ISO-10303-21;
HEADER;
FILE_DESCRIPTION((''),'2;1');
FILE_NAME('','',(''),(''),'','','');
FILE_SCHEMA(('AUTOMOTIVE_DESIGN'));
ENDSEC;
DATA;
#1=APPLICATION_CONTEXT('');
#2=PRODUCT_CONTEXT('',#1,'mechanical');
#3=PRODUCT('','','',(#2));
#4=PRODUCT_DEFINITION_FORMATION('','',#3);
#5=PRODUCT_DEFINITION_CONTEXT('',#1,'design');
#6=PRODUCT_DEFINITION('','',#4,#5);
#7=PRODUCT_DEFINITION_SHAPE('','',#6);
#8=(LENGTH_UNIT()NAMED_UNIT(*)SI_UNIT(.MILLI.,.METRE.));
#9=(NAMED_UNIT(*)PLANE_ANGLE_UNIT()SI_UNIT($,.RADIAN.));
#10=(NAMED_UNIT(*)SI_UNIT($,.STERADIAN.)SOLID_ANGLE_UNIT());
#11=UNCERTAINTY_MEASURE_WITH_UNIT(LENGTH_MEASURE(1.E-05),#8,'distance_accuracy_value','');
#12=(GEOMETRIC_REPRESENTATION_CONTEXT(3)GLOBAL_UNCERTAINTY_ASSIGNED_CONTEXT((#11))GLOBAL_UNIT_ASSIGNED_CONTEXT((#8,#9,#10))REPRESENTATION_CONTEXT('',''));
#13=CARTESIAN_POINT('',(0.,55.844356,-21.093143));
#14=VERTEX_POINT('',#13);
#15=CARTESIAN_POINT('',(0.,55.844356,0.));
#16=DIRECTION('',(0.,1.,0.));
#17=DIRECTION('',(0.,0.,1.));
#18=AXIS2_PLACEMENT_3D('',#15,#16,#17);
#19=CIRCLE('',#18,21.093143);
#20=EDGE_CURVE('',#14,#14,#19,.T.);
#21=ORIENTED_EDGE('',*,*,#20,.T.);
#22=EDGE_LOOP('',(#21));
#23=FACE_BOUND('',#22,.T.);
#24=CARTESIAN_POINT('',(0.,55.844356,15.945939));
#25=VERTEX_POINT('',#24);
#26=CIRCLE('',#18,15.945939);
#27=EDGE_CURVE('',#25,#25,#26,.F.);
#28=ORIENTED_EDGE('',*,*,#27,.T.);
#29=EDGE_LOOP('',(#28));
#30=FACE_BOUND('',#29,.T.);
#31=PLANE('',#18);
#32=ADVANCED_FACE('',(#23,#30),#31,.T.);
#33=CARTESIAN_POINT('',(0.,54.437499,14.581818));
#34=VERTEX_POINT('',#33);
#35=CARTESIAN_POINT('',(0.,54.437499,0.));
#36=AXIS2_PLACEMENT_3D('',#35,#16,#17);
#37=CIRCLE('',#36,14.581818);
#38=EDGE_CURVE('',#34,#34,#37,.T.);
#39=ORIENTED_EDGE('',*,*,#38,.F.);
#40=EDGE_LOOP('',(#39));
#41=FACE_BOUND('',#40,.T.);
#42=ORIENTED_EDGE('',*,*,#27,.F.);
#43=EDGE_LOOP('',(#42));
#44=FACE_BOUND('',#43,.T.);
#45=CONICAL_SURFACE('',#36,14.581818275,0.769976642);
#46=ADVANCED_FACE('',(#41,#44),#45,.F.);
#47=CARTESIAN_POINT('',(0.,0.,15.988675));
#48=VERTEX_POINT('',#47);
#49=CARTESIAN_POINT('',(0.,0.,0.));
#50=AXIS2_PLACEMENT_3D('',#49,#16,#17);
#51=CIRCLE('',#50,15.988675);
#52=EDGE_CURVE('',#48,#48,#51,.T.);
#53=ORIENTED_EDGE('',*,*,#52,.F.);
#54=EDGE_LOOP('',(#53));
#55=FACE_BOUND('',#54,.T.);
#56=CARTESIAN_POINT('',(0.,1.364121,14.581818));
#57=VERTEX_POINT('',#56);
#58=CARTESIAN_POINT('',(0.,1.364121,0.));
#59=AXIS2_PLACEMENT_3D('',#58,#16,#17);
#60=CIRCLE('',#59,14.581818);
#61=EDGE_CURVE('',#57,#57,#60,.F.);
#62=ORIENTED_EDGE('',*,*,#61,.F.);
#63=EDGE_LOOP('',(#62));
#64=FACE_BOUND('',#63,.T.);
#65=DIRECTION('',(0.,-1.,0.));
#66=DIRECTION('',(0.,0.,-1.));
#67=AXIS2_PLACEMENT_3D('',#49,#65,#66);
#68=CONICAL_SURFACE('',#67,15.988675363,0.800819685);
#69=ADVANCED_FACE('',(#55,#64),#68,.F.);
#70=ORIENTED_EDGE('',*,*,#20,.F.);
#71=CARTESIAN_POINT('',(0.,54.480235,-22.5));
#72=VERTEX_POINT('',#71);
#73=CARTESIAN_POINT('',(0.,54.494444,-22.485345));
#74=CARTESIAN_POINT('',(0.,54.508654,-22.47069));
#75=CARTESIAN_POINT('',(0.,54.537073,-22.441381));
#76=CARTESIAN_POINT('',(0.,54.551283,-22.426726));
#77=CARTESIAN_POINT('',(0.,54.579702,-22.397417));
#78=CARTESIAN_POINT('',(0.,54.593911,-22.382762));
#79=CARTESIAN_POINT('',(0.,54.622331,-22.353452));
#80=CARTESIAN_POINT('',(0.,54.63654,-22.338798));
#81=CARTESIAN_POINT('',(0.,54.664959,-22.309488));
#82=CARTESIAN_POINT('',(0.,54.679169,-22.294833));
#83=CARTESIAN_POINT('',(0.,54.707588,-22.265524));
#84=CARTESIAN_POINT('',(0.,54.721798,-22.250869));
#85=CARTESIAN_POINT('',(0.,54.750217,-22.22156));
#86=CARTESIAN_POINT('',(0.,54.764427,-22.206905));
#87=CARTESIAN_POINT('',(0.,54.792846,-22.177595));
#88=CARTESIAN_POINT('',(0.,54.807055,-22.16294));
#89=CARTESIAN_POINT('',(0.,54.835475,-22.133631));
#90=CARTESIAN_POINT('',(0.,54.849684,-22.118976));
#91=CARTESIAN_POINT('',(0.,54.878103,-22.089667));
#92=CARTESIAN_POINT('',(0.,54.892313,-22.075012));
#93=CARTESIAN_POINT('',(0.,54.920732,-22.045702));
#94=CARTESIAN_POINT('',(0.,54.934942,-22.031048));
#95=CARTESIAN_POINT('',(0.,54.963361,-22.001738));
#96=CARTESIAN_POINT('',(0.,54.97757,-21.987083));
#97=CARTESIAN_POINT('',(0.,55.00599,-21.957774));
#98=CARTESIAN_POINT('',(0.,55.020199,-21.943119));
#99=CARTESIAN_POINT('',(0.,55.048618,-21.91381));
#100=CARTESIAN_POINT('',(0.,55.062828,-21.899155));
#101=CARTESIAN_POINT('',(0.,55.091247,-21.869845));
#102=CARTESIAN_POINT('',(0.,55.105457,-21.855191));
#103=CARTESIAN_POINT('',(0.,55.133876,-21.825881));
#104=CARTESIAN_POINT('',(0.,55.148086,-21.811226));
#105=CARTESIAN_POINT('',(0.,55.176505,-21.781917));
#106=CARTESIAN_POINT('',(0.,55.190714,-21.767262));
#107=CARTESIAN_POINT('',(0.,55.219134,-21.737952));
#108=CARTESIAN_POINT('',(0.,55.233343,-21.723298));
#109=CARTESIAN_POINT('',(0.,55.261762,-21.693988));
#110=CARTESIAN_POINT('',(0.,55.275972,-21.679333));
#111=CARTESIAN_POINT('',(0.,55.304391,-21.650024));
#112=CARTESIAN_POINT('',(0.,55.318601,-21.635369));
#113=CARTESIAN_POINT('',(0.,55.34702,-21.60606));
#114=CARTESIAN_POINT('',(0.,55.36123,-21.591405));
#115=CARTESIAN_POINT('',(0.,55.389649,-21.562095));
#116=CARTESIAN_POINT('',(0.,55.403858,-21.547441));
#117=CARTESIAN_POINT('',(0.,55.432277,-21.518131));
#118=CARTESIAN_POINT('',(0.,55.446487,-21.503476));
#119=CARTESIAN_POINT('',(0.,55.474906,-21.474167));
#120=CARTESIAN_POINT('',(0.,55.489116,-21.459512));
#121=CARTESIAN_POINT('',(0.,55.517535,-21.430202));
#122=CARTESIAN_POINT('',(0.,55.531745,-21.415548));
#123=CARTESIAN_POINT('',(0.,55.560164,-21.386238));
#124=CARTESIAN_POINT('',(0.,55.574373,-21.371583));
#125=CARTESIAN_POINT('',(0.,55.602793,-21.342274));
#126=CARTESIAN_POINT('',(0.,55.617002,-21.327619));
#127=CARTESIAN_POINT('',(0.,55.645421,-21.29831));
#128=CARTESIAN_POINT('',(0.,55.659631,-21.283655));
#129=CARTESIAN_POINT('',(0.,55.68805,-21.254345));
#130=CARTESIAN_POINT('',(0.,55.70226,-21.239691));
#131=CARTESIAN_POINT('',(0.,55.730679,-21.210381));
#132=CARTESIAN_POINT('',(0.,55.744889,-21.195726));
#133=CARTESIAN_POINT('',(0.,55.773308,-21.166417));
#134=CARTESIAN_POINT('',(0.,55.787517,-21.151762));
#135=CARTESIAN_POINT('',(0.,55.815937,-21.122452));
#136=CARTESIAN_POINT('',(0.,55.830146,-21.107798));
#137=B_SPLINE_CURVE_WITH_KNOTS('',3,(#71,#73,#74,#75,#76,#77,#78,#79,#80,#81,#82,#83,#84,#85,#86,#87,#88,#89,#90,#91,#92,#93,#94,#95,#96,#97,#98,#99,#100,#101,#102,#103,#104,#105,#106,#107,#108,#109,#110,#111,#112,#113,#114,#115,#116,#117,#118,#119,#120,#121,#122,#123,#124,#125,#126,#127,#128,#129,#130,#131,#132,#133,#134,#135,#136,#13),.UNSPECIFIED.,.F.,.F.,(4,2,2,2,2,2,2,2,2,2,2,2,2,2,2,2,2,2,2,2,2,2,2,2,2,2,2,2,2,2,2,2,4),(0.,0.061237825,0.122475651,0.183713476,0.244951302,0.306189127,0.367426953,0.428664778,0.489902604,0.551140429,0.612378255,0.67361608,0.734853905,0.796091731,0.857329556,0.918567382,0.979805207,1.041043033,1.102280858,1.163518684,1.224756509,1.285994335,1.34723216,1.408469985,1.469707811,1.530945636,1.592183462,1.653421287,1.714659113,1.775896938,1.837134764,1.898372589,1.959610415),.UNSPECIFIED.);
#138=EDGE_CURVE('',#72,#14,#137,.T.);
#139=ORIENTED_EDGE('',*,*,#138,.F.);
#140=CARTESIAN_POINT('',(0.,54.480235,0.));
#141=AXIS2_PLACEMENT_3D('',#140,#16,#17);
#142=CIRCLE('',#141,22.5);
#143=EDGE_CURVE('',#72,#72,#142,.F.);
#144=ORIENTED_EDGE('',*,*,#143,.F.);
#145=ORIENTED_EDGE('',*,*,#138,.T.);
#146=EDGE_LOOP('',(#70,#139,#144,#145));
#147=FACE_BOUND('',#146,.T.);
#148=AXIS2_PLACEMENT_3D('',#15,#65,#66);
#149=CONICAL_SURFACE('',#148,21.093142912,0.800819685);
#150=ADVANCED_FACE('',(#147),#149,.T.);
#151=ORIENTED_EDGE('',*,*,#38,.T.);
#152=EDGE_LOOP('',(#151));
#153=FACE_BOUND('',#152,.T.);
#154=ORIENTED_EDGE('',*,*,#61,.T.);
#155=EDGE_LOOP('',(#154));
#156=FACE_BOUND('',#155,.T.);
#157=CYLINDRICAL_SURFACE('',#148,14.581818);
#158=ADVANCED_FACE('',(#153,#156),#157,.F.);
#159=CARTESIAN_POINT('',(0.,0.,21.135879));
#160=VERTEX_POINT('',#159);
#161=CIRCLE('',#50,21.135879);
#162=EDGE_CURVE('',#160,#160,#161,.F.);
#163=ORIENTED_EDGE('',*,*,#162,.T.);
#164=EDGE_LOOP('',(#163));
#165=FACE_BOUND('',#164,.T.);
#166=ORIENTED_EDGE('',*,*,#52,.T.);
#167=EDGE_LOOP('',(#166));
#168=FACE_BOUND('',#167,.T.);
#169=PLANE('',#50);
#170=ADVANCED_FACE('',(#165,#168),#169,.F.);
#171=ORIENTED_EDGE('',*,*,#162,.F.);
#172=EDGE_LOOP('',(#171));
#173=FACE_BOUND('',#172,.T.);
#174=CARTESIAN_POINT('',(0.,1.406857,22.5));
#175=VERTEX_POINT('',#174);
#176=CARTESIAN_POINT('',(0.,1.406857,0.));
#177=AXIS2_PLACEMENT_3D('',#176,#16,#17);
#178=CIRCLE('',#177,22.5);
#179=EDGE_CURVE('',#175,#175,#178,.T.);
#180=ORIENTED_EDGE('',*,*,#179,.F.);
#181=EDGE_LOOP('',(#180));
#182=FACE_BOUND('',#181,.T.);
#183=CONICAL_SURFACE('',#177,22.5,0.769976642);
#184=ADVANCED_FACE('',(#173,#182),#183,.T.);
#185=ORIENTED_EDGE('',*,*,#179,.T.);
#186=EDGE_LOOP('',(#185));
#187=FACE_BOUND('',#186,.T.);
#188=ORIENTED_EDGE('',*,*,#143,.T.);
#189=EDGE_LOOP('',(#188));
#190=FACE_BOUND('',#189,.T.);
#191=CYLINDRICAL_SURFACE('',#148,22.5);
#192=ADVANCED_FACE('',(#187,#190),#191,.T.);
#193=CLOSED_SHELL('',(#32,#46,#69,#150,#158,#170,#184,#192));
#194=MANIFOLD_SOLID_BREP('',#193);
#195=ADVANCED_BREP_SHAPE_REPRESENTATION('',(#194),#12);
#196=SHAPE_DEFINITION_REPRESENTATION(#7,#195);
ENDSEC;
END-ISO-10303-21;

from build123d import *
from OCP.BRepFilletAPI import BRepFilletAPI_MakeChamfer

# Parameters (mm, degrees)
SKETCH1_R           = 22.5
BOSS_EXTRUDE1_DEPTH = 55.844355692
SKETCH2_R           = 14.581818275
CUT_EXTRUDE1_DEPTH  = 65.273572039
CHAMFER1_SIZE       = 1.364121003
CHAMFER1_SIZE2      = 1.406857088


with BuildPart() as part:
    # Sketch1 → Boss-Extrude1 (new body)
    with BuildSketch(Plane(origin=(0, 0, 0), x_dir=(1, 0, 0), z_dir=(0, 1, 0))):
        Circle(SKETCH1_R)
    extrude(amount=BOSS_EXTRUDE1_DEPTH)

    # Sketch2 → Cut-Extrude1 (cut, through all)
    with BuildSketch(Plane(origin=(0, 0, 0), x_dir=(1, 0, 0), z_dir=(0, 1, 0))):
        Circle(SKETCH2_R)
    extrude(amount=CUT_EXTRUDE1_DEPTH, mode=Mode.SUBTRACT)

    # Chamfer1: one chamfer whose edges measure the first distance from different faces: ONE call of the kernel's chamfer builder (chamfer() names one face for all edges)
    chamfer1_edges_1 = [part.edges().sort_by_distance(p)[0] for p in [
        (-14.581818275, 55.844355692, 0),
    ]]
    chamfer1_side_1 = [part.faces().sort_by_distance(p)[0] for p in [
        (-21.863603897, 55.844355692, 0),
    ]]
    chamfer1_edges_2 = [part.edges().sort_by_distance(p)[0] for p in [
        (-14.581818275, 0, 0),
    ]]
    chamfer1_side_2 = [part.faces().sort_by_distance(p)[0] for p in [
        (-14.581818275, 27.922177846, 0),
    ]]
    chamfer1_edges_3 = [part.edges().sort_by_distance(p)[0] for p in [
        (-22.5, 0, 0),
    ]]
    chamfer1_side_3 = [part.faces().sort_by_distance(p)[0] for p in [
        (-21.863603897, 0, 0),
    ]]
    chamfer1_edges_4 = [part.edges().sort_by_distance(p)[0] for p in [
        (-22.5, 55.844355692, 0),
    ]]
    chamfer1_side_4 = [part.faces().sort_by_distance(p)[0] for p in [
        (-22.5, 27.922177846, 0),
    ]]
    chamfer1 = BRepFilletAPI_MakeChamfer(part.part.solid().wrapped)
    for e in chamfer1_edges_1:
        chamfer1.Add(CHAMFER1_SIZE, CHAMFER1_SIZE2, e.wrapped, chamfer1_side_1[0].wrapped)  # the first distance lies on this face
    for e in chamfer1_edges_2:
        chamfer1.Add(CHAMFER1_SIZE, CHAMFER1_SIZE2, e.wrapped, chamfer1_side_2[0].wrapped)  # the first distance lies on this face
    for e in chamfer1_edges_3:
        chamfer1.Add(CHAMFER1_SIZE, CHAMFER1_SIZE2, e.wrapped, chamfer1_side_3[0].wrapped)  # the first distance lies on this face
    for e in chamfer1_edges_4:
        chamfer1.Add(CHAMFER1_SIZE, CHAMFER1_SIZE2, e.wrapped, chamfer1_side_4[0].wrapped)  # the first distance lies on this face
    add(Compound.cast(chamfer1.Shape()), mode=Mode.REPLACE)


solid = part.part
